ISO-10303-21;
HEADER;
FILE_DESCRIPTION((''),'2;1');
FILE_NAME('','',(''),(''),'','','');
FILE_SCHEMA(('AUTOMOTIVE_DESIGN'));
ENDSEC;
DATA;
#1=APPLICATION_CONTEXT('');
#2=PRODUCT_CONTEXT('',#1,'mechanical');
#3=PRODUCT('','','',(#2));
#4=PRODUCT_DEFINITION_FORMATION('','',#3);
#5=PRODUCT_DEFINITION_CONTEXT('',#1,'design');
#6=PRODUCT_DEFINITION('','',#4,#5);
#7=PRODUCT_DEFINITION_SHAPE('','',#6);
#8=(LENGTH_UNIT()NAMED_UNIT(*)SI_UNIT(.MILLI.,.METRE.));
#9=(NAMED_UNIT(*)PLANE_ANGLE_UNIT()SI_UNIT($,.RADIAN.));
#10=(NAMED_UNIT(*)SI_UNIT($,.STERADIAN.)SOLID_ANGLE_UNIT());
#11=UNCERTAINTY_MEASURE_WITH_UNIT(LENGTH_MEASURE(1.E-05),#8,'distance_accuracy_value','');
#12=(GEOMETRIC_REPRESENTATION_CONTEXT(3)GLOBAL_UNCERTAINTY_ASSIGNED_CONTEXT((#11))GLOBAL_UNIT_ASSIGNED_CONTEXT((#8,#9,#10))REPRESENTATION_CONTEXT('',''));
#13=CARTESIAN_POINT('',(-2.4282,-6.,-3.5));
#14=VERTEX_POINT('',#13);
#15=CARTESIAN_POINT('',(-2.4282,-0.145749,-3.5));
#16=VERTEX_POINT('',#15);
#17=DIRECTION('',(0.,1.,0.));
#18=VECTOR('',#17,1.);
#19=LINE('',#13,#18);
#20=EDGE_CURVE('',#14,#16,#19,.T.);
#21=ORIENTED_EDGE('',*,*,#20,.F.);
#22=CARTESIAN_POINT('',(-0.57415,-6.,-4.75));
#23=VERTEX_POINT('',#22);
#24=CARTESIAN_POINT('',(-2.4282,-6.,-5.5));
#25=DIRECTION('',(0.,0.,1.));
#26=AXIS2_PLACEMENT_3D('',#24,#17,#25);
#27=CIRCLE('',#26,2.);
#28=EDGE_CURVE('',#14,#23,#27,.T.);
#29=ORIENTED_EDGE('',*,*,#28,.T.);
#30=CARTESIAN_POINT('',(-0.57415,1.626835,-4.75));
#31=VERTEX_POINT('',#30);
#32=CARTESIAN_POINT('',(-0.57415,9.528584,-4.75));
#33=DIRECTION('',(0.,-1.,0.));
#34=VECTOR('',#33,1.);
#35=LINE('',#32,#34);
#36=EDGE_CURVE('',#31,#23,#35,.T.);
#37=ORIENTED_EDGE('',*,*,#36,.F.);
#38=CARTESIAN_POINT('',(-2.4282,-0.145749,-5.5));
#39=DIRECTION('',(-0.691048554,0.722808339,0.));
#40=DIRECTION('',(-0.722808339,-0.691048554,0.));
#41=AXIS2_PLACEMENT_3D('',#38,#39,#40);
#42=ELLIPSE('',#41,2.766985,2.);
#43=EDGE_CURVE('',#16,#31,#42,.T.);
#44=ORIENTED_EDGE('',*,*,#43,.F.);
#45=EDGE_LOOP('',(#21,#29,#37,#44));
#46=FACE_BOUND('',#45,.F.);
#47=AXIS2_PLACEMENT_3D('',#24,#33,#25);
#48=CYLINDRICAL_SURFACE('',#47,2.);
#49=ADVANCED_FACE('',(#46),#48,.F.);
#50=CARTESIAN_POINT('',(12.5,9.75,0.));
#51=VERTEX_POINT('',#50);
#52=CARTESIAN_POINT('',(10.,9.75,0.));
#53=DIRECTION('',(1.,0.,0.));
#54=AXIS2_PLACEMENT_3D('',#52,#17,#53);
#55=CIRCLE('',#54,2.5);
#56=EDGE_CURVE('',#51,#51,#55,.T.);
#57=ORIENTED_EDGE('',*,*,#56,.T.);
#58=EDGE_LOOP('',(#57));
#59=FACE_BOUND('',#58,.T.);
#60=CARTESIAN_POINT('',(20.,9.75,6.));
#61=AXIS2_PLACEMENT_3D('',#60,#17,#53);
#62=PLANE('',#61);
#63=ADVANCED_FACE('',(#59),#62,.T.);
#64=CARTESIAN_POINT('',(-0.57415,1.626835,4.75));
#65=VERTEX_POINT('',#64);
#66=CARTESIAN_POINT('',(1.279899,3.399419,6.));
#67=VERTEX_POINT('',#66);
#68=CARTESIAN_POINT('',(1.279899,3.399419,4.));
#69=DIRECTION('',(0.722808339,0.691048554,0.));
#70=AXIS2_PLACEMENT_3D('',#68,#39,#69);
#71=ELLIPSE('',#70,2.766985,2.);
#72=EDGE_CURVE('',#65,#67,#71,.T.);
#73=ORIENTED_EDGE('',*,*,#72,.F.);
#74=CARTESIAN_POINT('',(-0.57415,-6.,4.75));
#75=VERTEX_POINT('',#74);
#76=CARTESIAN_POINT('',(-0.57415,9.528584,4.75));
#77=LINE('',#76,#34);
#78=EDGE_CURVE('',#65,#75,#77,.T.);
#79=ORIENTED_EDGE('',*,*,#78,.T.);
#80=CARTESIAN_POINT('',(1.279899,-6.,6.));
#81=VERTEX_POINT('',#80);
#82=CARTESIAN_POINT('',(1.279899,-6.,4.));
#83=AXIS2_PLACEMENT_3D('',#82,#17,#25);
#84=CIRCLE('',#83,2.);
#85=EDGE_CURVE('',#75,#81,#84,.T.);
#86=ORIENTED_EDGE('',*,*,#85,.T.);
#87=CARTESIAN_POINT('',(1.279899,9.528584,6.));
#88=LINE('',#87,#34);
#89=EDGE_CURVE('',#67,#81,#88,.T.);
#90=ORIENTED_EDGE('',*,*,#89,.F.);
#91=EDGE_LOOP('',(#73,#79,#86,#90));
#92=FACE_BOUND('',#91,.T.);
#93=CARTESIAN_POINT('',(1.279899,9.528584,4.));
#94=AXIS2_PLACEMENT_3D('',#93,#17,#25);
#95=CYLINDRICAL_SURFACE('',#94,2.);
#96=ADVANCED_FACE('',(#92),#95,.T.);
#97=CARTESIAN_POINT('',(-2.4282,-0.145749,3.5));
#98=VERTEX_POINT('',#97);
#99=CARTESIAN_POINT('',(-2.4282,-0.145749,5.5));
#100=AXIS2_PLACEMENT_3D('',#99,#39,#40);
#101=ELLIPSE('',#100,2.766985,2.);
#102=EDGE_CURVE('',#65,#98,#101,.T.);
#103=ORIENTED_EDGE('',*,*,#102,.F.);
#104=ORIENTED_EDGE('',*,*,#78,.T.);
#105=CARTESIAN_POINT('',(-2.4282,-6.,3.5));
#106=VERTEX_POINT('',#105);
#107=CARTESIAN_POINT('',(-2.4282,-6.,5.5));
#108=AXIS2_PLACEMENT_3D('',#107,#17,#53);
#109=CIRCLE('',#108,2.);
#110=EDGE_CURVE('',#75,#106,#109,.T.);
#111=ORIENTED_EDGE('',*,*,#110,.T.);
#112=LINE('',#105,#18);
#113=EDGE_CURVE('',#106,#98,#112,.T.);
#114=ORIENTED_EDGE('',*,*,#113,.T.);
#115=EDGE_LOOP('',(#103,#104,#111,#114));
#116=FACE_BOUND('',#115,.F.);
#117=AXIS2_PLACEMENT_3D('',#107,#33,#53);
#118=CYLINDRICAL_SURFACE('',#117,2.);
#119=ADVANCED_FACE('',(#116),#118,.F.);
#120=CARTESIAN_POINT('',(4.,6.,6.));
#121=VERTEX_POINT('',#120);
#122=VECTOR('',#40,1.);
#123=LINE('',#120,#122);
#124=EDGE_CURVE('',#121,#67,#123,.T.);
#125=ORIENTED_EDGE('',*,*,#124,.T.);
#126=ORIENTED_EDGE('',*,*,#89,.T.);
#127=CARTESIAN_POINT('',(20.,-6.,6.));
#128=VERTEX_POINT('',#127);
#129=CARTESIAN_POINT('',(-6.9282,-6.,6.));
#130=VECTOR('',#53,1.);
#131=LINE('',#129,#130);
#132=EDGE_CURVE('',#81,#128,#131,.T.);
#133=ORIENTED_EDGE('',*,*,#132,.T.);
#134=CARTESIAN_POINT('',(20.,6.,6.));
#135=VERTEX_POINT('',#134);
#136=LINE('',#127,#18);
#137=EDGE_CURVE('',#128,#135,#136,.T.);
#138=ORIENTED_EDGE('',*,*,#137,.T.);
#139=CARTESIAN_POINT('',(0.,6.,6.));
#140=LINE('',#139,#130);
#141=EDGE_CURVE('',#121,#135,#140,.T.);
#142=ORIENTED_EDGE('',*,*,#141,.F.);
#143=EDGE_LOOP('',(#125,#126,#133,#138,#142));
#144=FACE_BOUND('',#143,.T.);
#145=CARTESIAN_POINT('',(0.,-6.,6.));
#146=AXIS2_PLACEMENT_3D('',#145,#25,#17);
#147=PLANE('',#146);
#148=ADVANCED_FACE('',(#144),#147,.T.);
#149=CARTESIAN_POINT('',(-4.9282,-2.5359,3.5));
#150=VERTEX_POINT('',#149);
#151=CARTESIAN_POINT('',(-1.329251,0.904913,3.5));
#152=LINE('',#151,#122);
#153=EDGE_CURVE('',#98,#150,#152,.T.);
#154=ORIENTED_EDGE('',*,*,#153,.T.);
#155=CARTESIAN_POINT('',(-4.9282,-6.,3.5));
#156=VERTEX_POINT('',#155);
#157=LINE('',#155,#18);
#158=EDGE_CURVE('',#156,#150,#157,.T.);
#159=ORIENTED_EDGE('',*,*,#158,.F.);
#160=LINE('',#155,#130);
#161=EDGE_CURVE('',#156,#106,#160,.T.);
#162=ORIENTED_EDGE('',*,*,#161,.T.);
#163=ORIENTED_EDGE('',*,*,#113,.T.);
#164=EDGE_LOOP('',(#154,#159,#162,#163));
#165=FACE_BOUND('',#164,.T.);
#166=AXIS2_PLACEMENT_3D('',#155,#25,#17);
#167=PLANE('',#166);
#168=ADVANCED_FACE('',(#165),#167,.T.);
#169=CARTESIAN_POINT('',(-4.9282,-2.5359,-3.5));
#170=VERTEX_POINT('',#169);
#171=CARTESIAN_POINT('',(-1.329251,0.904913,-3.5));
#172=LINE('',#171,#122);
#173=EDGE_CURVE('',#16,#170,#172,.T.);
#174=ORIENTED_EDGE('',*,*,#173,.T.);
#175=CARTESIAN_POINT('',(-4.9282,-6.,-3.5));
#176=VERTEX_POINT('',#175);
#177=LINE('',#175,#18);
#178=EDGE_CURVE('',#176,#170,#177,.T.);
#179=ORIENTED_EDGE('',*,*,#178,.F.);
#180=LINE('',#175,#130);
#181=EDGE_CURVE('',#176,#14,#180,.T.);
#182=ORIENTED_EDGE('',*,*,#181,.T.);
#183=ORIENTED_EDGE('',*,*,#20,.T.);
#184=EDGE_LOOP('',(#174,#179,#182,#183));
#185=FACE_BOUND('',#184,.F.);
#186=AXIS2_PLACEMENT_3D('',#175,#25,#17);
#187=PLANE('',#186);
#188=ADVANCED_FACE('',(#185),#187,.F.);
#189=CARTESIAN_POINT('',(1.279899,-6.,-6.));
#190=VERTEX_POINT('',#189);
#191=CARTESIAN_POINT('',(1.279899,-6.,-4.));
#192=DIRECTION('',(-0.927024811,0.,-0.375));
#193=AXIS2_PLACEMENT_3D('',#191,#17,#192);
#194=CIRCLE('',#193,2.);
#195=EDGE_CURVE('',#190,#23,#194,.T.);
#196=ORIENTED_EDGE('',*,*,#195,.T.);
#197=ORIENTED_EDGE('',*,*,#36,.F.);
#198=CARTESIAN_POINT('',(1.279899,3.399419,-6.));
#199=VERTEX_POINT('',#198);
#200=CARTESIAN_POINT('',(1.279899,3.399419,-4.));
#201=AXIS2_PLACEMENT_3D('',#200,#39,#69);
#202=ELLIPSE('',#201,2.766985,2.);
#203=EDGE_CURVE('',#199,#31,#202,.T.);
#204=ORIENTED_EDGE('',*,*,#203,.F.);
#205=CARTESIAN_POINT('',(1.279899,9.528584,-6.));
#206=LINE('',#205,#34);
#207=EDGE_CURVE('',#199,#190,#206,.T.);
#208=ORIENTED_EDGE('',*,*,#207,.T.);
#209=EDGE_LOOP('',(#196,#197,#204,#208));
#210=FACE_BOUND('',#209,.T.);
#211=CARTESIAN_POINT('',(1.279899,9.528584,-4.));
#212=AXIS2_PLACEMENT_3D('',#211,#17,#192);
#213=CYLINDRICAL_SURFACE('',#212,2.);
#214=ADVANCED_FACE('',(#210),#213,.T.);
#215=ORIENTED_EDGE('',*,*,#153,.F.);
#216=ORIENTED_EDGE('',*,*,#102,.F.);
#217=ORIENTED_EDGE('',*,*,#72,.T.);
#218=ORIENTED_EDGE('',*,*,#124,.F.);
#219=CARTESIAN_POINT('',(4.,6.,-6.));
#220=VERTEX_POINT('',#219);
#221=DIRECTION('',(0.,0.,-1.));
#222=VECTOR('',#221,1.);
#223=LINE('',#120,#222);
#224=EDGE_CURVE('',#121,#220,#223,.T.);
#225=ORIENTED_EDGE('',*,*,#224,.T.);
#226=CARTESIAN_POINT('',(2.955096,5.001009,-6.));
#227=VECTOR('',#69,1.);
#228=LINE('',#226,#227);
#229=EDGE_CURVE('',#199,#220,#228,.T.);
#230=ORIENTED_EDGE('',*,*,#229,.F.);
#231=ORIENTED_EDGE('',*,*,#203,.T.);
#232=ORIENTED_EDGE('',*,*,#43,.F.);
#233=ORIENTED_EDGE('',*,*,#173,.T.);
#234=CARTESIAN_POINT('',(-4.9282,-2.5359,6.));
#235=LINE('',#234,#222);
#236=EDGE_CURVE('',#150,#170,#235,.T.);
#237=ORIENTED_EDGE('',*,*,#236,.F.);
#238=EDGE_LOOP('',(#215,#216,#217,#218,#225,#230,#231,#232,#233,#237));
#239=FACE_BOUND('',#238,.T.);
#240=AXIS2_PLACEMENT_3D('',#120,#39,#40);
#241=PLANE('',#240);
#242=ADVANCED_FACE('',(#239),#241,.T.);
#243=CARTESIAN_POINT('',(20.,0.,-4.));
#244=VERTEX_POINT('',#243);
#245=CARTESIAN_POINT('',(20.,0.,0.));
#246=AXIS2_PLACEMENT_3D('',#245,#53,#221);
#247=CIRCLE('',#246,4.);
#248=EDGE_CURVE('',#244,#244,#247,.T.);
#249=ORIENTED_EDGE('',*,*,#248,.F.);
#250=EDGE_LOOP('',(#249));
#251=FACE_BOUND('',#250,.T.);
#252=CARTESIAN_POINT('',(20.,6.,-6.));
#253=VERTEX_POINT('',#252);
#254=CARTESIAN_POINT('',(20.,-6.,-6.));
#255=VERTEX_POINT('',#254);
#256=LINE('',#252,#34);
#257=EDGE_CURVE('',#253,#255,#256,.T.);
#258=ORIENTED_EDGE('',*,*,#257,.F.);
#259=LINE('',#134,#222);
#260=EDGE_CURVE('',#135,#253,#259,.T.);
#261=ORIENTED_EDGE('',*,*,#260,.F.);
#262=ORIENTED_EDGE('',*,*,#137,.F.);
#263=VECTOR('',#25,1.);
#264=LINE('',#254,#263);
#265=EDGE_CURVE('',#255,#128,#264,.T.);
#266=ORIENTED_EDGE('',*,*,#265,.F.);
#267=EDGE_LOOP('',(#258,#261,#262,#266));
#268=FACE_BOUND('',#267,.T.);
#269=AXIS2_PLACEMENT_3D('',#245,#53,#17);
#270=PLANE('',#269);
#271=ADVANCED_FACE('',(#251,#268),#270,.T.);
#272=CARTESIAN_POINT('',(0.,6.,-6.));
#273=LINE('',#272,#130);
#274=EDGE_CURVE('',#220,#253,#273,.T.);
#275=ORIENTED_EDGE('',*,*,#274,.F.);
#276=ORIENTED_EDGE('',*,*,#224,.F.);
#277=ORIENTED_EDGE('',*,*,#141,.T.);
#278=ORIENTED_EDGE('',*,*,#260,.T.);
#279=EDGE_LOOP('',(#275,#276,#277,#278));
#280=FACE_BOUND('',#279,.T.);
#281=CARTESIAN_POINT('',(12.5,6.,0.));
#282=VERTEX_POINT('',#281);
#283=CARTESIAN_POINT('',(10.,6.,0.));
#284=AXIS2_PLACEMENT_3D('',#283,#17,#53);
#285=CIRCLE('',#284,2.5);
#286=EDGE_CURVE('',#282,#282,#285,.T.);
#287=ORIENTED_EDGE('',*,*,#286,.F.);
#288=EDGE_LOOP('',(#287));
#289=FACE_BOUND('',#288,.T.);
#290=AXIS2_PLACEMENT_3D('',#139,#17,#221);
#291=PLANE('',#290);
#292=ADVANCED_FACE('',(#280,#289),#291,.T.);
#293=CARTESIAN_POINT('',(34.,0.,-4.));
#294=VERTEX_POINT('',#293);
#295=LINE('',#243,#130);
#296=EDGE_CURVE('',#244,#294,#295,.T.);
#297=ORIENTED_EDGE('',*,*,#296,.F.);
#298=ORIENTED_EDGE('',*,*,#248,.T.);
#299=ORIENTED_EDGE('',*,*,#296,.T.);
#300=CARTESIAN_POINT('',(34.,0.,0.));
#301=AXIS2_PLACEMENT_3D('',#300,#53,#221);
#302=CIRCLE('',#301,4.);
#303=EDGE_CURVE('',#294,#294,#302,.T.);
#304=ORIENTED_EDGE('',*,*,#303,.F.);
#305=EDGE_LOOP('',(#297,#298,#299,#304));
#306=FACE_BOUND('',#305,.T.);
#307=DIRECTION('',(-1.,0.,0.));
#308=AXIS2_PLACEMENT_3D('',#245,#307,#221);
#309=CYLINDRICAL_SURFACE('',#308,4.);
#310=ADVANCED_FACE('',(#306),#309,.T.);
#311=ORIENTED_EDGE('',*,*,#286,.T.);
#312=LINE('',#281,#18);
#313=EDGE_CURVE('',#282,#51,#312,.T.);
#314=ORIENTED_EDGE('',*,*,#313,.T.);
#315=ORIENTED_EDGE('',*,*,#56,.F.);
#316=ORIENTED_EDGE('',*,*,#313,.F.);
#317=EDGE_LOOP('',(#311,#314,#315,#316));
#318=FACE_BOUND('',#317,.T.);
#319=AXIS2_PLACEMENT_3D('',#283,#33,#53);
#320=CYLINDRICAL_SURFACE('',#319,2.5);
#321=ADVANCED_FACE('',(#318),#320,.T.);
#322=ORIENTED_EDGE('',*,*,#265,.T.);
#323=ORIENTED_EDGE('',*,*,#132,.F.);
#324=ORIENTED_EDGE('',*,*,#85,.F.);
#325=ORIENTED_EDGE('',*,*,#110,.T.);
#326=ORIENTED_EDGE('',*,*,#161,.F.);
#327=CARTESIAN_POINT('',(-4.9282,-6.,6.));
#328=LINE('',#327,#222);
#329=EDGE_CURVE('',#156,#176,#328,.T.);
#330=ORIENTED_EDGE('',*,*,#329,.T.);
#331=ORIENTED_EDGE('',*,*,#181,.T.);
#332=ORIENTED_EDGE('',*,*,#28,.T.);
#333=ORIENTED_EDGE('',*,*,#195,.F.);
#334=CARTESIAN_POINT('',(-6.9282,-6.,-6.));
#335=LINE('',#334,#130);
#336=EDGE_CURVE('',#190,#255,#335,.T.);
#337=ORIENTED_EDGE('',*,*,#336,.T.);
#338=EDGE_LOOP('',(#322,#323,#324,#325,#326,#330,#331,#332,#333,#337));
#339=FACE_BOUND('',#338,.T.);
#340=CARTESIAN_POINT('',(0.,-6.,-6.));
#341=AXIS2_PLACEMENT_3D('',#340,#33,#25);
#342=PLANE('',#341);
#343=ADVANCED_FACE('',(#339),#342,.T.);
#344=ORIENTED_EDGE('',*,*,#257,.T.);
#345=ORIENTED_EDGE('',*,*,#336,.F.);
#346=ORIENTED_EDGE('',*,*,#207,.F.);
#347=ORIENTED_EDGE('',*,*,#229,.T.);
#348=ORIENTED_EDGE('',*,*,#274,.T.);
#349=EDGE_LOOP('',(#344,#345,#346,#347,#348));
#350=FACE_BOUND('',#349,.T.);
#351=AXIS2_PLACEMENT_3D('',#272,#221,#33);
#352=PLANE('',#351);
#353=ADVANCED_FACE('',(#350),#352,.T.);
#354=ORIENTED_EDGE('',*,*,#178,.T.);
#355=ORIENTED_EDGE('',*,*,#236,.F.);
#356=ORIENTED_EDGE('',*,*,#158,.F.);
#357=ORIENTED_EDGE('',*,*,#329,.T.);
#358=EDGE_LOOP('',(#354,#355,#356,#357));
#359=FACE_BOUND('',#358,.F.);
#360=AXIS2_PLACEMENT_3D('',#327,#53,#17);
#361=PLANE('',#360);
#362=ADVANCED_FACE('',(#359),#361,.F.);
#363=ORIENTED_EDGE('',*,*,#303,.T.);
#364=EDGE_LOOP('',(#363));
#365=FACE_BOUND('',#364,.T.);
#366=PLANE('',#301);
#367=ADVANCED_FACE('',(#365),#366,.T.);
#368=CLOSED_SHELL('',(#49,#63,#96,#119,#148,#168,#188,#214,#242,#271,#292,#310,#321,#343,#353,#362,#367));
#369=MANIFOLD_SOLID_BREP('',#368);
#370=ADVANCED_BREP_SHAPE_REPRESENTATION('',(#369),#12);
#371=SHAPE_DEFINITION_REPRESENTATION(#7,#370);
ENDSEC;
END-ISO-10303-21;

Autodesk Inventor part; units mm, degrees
ref_plane "YZ Plane" through (0, 0, 0) normal (1, 0, 0) x (0, 1, 0)
ref_plane "XZ Plane" through (0, 0, 0) normal (0, 1, 0) x (-1, 0, 0)
ref_plane "XY Plane" through (0, 0, 0) normal (0, 0, 1) x (1, 0, 0)
sketch "Sketch1" plane through (0, 0, 0) normal (1, 0, 0) x (0, 1, 0)
  line L0 (-6, 6) -> (6, 6)
  line L1 (6, 6) -> (6, -6)
  line L2 (6, -6) -> (-6, -6)
  line L3 (-6, -6) -> (-6, 6)
  line L4 (-6, 6) -> (6, -6) construction
  line L5 (6, 6) -> (-6, -6) construction
  point P0 (0, 0)
  dimension "d0" = 12
  dimension "d1" = 12
extrude "Extrusion1" add sketch "Sketch1" along normal blind 20
sketch "Sketch2" plane through (0, -6, 6) normal (0, 0, 1) x (1, 0, 0)
  line L0 (0, 0) -> (0, 12) projected
  line L1 (0, 12) -> (-6.9282, 0)
  line L2 (0, 12) -> (15.674, 12) construction
  line L3 (0, 0) -> (-6.9282, 0)
  line L4 (0, 0) -> (20, 0) projected
  line L5 (0, 0) -> (0, 12)
  point P0 (0, 6)
  dimension "d4" = 120
extrude "Extrusion2" add sketch "Sketch2" against normal blind 12
sketch "Sketch3" plane through (20, 0, 0) normal (1, 0, 0) x (0, 0, -1)
  circle A0 centre (0, 0) radius 4
  dimension "d7" = 8
extrude "Extrusion3" add sketch "Sketch3" along normal blind 14
sketch "Sketch4" plane through (20, 6, 6) normal (0, 1, 0) x (1, 0, 0)
  circle A0 centre (-10, 6) radius 2.5
  line L0 (-20, 0) -> (-20, 12) projected
  line L1 (-20, 0) -> (0, 0) projected
  point P0 (-20, 6)
  dimension "d10" = 5
  dimension "d11" = 10
  dimension "d12" = 6
extrude "Extrusion4" add sketch "Sketch4" along normal blind 3.75
sketch "Sketch5" plane through (20, -6, 6) normal (0, 0, 1) x (1, 0, 0)
  line L0 (0, 0) -> (-26.9282, 0) projected
  line L1 (-26.9282, 0) -> (-24.9282, 0)
  line L2 (-24.9282, 0) -> (-24.9282, 3.4641)
  line L3 (-26.9282, 0) -> (-20, 12) projected
  line L4 (-26.9282, 0) -> (-24.9282, 3.4641)
  point P0 (-20, 6)
  dimension "d15" = 2
extrude "Extrusion5" cut sketch "Sketch5" against normal blind 12
sketch "Sketch6" plane through (-4.9282, -6, 6) normal (-1, 0, 0) x (0, 0, 1)
  line L0 (0, 0) -> (-12, 0) projected
  line L1 (0, 0) -> (-2.5, 0)
  line L2 (-2.5, 0) -> (-2.5, 12)
  line L3 (-12, 12) -> (0, 12) projected
  line L4 (-2.5, 12) -> (0, 12)
  line L5 (0, 12) -> (0, 0)
  line L6 (-12, 0) -> (-12, 3.4641) projected
  line L7 (-12, 0) -> (-9.5, 0)
  line L8 (-9.5, 0) -> (-9.5, 12)
  line L9 (-9.5, 12) -> (-12, 12)
  line L10 (-12, 3.4641) -> (-12, 12) projected
  line L11 (-12, 12) -> (-12, 0)
  point P0 (-6, 6)
  dimension "d18" = 2.5
  dimension "d19" = 2.5
extrude "Extrusion6" cut sketch "Sketch6" against normal blind 4.5 contours L0 L2 L3 L5 | L0 L6 L10 L3 L8
fillet "Fillet1" radius 2 4 edges at (-0.4282, -0.3708, 3.5) (-0.4282, -0.3708, -3.5) (-0.4282, -0.3708, -6) (-0.4282, -0.3708, 6)
sketch "Sketch7" plane through (20, -6, 6) normal (0, 0, 1) x (1, 0, 0)
  line L0 (-20, 12) -> (-18.7201, 12) projected
  line L1 (-20, 12) -> (-16, 12)
  line L2 (-20.5742, 11.0055) -> (-22.4282, 7.7942) projected
  line L3 (-16, 12) -> (-22.4282, 7.7942)
  line L4 (-22.4282, 7.7942) -> (-20, 12)
  point P0 (-20, 6)
  dimension "d23" = 4
extrude "Extrusion7" cut sketch "Sketch7" against normal blind 20
sketch "Sketch8" plane through (20, -6, 6) normal (0, 0, 1) x (1, 0, 0)
  line L0 (-16, 12) -> (-18.7201, 10.2203) projected
  line L1 (-24.9282, 3.4641) -> (-22.4282, 7.7942) projected
  line L2 (-16, 12) -> (-24.9282, 3.4641)
  line L3 (-24.9282, 3.4641) -> (-24.9282, 12)
  line L4 (-16, 12) -> (0, 12) projected
  line L5 (-24.9282, 12) -> (-16, 12)
  point P0 (-20, 6)
extrude "Extrusion8" cut sketch "Sketch8" against normal blind 20
properties part number "18 pin schieter"
